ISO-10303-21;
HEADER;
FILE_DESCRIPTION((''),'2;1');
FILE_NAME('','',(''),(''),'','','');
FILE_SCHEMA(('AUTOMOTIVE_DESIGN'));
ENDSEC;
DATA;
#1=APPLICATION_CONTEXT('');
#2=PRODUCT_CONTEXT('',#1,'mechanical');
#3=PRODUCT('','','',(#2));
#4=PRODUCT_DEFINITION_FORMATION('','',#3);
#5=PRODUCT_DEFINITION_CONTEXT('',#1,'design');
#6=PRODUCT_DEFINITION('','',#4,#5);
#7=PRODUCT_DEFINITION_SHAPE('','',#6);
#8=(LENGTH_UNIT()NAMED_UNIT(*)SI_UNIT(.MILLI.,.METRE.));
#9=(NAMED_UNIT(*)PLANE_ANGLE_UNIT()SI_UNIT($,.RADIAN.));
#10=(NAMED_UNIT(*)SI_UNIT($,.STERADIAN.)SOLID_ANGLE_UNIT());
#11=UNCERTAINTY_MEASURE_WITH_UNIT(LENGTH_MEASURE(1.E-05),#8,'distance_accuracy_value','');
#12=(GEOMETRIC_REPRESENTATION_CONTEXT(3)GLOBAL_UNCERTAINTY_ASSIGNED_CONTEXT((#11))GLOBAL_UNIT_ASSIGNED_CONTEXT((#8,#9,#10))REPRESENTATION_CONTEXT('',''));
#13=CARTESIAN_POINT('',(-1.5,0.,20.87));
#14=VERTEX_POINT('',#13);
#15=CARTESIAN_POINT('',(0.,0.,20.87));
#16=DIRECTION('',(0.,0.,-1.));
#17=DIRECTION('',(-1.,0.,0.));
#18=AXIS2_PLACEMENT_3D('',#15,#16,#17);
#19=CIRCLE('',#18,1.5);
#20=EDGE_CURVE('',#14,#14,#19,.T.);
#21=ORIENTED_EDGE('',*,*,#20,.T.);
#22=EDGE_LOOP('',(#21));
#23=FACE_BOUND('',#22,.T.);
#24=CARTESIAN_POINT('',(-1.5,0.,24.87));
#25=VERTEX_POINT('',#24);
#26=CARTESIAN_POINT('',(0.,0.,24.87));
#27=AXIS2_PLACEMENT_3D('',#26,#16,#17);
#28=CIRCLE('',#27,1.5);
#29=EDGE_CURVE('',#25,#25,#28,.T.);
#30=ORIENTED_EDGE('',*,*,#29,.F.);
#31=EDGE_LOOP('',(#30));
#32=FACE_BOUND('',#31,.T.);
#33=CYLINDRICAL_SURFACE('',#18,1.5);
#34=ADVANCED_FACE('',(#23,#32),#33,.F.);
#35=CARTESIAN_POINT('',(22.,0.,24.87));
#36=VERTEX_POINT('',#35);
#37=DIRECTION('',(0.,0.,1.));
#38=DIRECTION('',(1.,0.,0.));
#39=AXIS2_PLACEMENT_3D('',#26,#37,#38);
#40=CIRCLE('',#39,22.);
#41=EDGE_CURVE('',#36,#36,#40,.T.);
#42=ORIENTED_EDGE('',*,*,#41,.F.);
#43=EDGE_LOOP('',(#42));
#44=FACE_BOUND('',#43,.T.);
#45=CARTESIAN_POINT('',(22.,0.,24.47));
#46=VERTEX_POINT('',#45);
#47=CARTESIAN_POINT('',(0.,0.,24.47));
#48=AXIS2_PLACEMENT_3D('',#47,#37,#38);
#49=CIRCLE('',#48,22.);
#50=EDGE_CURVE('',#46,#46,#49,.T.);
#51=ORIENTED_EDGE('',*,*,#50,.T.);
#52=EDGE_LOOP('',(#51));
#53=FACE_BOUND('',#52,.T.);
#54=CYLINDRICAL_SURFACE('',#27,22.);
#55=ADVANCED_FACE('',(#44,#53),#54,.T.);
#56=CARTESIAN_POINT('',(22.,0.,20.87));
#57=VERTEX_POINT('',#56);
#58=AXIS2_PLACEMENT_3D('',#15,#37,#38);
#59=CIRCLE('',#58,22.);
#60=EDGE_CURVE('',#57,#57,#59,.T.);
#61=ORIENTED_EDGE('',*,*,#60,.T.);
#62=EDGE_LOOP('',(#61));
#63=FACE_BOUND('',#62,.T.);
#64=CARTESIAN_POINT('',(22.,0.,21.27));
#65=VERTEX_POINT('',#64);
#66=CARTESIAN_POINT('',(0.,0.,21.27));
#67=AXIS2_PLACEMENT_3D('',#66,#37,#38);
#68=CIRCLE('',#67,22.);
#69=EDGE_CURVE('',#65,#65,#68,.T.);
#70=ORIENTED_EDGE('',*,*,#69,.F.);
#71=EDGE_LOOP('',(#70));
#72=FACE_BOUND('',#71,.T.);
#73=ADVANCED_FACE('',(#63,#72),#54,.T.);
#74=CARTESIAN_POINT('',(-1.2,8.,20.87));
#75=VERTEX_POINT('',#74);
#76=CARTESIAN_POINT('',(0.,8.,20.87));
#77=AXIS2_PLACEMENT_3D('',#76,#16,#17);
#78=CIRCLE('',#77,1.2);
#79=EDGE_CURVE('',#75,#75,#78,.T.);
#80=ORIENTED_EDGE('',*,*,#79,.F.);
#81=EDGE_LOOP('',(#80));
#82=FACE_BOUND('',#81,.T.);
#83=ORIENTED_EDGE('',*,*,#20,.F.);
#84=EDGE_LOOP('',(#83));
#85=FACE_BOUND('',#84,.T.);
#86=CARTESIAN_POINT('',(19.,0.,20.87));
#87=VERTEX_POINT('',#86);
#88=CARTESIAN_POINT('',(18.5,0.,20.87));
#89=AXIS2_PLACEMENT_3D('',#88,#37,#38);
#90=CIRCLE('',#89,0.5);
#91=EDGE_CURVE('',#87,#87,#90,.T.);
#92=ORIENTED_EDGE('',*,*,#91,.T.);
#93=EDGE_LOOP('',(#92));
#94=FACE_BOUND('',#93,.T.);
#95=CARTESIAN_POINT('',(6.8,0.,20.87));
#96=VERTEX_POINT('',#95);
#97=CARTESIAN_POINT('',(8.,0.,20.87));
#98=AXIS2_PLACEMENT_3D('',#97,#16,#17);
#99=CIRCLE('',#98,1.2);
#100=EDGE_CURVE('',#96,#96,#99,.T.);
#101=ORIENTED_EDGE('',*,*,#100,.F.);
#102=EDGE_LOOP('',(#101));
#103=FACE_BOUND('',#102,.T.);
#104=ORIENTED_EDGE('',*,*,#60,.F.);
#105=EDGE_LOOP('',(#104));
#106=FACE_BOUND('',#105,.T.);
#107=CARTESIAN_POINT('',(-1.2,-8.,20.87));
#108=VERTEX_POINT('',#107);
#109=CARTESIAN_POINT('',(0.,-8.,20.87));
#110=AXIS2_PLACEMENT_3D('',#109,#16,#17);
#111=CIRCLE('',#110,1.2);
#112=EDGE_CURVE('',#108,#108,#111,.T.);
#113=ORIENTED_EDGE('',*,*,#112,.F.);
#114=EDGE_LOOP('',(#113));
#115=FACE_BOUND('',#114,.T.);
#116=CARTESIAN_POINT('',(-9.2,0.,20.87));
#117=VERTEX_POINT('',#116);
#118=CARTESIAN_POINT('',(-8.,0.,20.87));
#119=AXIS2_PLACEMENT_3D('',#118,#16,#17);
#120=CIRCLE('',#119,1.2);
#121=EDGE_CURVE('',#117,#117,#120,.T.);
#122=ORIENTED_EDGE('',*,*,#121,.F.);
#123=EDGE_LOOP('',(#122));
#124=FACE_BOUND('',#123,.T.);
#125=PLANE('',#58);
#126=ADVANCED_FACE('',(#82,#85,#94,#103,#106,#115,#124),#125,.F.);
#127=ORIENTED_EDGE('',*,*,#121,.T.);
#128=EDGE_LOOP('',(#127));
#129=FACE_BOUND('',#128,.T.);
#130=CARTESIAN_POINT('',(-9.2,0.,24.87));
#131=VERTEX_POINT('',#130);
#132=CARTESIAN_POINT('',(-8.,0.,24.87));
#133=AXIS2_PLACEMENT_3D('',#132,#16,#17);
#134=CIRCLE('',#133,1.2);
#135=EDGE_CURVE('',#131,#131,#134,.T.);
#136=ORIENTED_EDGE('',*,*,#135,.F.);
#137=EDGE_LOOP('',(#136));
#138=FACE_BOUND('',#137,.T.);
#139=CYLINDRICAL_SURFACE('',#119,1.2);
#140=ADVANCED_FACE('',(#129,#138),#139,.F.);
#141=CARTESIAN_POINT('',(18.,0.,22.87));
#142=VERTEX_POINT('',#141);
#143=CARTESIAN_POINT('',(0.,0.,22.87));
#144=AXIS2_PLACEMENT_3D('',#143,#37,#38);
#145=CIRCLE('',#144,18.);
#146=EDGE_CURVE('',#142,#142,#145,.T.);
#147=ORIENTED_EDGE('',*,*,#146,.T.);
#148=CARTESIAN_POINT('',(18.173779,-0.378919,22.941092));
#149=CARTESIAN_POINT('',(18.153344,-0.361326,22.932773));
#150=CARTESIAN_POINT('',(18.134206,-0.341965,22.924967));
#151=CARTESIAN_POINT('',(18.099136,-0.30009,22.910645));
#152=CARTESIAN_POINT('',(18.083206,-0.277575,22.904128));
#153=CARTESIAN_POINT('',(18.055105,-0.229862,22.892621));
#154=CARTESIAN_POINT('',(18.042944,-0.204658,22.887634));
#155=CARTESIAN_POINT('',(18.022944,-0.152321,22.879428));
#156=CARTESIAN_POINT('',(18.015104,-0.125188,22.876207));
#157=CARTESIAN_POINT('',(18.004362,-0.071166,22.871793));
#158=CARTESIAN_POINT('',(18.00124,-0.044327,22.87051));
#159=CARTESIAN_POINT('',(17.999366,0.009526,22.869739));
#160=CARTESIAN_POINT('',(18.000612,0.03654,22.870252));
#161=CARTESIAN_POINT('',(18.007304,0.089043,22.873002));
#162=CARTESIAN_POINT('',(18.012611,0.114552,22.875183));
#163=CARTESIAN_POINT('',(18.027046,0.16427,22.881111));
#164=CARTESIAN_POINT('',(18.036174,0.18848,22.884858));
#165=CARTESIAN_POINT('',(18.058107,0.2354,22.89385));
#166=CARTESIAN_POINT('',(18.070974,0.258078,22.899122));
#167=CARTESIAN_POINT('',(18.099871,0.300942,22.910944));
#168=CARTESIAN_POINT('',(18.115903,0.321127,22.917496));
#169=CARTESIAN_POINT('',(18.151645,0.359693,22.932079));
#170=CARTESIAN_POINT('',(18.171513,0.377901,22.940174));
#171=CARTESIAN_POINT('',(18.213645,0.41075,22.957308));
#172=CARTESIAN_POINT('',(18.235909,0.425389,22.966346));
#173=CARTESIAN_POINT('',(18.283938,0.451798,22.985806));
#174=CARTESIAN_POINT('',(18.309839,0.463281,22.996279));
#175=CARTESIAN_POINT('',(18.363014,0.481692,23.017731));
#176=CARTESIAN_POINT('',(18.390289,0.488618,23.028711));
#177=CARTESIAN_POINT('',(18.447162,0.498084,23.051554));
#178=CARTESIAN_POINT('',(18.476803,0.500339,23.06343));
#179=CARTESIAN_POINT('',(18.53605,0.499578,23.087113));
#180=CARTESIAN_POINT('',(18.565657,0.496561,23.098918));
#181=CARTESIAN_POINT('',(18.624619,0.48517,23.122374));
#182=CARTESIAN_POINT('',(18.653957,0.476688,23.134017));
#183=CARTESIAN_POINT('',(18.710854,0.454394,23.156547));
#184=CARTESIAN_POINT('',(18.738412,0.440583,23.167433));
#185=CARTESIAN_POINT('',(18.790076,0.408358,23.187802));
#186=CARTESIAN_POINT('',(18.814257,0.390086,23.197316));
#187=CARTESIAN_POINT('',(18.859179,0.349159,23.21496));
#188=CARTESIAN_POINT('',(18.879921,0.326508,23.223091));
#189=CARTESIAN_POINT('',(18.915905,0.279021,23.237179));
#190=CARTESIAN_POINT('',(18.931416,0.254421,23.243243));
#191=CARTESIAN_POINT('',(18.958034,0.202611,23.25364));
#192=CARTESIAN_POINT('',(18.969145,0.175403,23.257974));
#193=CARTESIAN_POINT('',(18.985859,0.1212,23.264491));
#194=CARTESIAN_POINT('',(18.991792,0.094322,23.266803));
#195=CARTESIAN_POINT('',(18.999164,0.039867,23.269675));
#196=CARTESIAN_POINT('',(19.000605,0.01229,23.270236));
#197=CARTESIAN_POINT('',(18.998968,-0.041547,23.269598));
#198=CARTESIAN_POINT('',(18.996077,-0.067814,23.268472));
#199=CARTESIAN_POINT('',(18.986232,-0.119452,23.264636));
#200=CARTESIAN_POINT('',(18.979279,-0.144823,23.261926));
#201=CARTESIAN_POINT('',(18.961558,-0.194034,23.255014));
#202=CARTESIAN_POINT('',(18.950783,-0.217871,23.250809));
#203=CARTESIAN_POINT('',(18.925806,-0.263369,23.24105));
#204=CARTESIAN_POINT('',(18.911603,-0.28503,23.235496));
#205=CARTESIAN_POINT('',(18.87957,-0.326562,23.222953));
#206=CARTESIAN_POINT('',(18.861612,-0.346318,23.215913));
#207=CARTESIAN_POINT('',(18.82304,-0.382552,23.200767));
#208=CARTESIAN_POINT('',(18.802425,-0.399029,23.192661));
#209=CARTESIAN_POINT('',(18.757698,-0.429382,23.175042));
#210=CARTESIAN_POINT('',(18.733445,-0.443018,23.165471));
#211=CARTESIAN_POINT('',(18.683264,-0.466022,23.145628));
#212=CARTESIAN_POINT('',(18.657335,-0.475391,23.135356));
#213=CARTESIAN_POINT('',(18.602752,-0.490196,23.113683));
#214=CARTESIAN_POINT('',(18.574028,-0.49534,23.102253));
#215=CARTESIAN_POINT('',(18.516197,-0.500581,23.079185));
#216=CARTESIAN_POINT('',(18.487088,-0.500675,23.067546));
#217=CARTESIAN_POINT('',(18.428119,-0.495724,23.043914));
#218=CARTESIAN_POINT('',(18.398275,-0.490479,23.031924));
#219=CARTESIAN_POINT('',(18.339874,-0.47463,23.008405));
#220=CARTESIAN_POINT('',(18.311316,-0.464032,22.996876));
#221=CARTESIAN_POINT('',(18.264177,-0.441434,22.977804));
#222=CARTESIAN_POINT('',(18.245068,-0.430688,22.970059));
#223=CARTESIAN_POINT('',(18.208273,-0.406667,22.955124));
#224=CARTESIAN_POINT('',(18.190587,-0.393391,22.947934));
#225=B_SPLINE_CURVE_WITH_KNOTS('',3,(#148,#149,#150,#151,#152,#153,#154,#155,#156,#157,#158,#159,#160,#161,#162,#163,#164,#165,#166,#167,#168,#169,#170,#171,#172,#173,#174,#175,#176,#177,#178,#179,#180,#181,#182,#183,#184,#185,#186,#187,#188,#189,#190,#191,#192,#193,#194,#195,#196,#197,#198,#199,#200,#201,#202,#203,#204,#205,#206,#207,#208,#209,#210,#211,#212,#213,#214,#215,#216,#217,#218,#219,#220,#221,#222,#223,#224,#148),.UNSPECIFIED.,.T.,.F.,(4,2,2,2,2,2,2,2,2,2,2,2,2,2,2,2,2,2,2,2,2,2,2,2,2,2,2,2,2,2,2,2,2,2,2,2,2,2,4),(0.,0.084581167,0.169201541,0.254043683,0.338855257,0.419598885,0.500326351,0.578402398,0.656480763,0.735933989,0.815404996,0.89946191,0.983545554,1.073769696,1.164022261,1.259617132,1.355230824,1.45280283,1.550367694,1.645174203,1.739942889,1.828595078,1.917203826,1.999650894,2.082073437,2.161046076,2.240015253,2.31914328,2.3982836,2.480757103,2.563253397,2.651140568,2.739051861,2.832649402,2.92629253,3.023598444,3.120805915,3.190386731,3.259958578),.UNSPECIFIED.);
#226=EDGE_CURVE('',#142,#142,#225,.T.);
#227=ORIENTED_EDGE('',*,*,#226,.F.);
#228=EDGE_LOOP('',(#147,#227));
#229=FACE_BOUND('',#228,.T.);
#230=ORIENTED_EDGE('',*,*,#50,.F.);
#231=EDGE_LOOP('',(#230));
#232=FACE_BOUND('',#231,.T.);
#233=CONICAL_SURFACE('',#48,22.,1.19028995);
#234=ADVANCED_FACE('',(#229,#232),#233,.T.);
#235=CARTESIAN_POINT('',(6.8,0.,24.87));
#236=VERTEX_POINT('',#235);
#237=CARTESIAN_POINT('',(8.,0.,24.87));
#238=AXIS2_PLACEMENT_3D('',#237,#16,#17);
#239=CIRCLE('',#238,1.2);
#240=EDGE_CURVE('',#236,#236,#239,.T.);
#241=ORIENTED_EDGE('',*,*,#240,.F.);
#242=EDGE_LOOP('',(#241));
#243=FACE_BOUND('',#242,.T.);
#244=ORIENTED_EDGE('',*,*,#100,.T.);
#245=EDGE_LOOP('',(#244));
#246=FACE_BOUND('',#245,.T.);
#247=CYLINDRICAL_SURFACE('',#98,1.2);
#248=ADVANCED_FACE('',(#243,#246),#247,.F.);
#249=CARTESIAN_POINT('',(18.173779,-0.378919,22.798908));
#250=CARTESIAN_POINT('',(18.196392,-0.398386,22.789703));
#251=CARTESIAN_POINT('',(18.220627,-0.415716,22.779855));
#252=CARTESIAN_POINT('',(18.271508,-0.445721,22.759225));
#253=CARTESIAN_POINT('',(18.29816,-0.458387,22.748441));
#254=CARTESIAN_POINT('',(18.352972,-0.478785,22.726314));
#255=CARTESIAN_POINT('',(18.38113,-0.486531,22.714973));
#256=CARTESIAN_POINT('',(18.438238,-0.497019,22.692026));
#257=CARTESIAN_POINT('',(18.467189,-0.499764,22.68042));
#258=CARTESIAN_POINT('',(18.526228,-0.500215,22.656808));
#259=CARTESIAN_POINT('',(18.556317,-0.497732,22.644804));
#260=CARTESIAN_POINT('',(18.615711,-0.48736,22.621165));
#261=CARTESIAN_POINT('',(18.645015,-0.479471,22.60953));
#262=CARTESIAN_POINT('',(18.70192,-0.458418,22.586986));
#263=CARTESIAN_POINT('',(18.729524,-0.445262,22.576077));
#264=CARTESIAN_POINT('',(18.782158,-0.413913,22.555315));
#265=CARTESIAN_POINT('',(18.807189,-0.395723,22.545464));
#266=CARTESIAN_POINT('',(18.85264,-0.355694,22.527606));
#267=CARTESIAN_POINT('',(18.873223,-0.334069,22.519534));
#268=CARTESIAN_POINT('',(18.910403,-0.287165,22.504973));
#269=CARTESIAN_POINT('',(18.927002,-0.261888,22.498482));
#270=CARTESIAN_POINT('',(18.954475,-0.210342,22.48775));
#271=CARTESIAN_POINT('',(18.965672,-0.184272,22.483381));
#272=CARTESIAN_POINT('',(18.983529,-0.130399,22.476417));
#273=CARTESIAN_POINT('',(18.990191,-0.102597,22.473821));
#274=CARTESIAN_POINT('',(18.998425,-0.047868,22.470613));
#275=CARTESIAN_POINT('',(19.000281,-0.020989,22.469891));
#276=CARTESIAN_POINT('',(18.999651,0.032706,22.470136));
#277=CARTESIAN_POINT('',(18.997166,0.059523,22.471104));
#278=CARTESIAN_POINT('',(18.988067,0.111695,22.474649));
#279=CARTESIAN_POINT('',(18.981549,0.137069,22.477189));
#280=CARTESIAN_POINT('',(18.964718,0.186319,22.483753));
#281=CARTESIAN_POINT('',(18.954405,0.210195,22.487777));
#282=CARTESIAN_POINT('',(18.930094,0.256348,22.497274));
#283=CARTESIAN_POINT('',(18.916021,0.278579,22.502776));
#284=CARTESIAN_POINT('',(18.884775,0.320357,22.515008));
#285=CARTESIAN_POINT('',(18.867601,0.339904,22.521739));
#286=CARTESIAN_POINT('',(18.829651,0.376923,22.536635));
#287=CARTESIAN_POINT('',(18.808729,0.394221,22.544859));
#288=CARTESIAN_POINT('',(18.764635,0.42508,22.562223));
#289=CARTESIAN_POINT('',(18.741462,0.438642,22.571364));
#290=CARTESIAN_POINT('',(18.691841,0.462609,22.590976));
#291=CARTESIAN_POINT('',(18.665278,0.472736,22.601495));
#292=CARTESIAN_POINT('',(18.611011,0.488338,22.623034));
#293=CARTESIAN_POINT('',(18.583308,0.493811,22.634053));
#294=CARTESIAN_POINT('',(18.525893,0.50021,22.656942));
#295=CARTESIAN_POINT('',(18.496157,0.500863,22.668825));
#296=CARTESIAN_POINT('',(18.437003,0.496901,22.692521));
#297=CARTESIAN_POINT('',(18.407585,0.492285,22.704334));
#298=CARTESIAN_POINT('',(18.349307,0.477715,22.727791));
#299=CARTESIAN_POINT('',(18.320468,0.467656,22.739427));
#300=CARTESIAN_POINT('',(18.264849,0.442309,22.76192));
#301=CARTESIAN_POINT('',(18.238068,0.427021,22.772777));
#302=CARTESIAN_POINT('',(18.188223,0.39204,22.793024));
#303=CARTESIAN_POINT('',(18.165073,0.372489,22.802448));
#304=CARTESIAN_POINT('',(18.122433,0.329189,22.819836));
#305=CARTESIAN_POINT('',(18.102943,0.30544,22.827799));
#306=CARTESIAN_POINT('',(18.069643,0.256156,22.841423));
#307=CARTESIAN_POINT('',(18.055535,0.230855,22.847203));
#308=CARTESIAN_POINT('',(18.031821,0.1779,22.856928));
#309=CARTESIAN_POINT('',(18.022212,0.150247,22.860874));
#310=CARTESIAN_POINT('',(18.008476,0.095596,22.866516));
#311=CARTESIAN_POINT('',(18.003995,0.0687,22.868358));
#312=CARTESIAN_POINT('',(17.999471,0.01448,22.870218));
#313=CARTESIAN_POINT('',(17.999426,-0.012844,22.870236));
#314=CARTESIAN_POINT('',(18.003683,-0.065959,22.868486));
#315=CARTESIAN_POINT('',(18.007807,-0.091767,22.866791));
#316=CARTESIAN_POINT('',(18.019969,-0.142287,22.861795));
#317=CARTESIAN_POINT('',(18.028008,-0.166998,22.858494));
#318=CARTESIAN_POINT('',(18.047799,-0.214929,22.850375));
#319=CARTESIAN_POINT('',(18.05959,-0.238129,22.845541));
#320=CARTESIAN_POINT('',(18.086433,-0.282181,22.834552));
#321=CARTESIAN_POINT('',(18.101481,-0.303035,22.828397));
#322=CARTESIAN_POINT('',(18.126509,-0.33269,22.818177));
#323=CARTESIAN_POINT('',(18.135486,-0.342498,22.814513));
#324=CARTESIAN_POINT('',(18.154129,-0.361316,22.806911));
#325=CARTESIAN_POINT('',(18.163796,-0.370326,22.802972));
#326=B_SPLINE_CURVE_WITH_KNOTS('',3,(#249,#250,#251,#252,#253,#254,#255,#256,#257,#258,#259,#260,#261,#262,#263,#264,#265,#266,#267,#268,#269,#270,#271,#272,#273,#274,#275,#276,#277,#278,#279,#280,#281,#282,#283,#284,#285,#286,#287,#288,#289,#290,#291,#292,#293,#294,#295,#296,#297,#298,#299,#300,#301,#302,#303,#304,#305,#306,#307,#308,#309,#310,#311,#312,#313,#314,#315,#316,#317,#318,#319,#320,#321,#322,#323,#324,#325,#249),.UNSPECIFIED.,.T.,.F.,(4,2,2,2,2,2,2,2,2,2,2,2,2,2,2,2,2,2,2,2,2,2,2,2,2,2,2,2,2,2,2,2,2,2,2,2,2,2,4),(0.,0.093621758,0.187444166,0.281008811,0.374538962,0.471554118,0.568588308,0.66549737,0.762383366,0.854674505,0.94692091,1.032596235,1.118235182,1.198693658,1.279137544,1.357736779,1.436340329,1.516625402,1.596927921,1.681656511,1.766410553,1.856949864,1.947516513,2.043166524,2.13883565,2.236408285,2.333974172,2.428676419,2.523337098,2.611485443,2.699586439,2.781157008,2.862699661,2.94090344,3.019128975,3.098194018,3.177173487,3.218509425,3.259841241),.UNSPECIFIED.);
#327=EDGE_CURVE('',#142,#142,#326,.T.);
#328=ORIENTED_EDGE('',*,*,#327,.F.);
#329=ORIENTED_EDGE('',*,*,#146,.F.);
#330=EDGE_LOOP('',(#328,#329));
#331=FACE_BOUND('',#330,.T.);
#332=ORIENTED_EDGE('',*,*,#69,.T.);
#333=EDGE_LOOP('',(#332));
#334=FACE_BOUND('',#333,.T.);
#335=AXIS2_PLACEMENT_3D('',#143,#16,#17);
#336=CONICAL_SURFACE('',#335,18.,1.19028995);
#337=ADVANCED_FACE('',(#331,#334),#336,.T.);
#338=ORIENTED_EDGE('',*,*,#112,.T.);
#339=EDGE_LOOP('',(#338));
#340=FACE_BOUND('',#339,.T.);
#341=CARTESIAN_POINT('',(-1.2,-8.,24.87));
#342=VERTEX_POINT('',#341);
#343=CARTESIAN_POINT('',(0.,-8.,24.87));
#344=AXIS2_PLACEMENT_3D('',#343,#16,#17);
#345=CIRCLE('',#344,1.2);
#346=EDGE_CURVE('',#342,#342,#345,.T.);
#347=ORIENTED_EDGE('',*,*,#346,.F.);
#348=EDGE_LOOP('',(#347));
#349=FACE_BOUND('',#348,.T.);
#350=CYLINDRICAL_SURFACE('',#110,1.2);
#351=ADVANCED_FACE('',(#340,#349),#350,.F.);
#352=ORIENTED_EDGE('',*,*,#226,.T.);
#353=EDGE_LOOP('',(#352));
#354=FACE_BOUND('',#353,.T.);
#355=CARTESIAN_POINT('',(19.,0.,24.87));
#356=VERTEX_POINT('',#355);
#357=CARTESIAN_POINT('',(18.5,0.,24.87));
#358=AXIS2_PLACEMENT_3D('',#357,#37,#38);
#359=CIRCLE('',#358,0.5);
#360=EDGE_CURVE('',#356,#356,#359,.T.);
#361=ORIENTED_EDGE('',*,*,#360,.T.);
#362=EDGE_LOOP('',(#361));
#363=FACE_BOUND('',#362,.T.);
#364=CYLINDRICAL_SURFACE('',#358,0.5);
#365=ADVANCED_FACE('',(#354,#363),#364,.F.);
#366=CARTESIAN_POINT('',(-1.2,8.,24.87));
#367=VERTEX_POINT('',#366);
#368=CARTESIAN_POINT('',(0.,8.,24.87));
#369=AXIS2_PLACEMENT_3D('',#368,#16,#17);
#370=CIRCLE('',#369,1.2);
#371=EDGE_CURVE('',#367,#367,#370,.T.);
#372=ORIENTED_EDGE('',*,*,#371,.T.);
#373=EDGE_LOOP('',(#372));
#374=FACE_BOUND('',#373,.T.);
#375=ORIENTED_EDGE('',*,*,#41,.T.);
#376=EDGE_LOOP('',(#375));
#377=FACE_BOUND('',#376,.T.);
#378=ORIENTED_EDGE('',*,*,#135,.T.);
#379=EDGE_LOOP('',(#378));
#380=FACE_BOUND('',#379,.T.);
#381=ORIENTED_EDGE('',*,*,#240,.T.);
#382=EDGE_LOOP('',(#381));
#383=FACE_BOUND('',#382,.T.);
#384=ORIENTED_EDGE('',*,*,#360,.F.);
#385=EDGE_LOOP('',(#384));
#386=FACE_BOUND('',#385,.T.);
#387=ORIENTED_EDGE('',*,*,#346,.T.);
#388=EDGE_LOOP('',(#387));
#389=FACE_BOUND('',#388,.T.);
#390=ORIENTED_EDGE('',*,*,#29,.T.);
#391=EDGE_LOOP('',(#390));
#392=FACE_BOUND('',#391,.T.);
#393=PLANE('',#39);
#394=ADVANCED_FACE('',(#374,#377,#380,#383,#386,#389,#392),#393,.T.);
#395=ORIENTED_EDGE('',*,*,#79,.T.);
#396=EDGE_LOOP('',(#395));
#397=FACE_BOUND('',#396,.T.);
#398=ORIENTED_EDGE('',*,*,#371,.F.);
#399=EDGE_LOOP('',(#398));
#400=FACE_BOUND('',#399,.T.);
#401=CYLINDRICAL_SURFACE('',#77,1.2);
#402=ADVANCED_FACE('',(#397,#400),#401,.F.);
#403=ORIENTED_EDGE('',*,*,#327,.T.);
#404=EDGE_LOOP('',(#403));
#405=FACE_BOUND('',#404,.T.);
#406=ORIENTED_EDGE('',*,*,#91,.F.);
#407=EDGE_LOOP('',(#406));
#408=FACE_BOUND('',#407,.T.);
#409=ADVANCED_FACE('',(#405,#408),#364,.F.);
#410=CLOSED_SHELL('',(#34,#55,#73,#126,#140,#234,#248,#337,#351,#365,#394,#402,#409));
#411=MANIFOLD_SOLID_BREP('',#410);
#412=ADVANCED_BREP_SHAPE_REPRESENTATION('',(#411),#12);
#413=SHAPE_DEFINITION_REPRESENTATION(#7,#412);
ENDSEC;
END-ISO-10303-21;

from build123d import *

# Parameters (mm, degrees)
SKETCH1_R                = 22
BOSS_EXTRUDE1_DEPTH      = 4
M2_CLEARANCE_HOLE1_D     = 2.4
F_1_0_1_DIAMETER_HOLE1_D = 1
F_3_0_3_DIAMETER_HOLE1_D = 3


# Read off the part's stored shape, not the designer's step: Imported1
with BuildPart() as part:
    # Sketch1 → Boss-Extrude1 (new body)
    with BuildSketch(Plane.XY.offset(20.87)):
        Circle(SKETCH1_R)
    extrude(amount=BOSS_EXTRUDE1_DEPTH)

    # M2 Clearance Hole1 (through all)
    with Locations(Plane(origin=(0, 0, 20.87), x_dir=(-1, 0, 0), z_dir=(0, 0, -1))):
        with Locations((0, 8), (-8, 0), (0, -8), (8, 0)):
            Hole(M2_CLEARANCE_HOLE1_D / 2)

    # Sketch4 → Cut-Revolve5 (revolve, cut)
    with BuildSketch(Plane(origin=(0, 0, 0), x_dir=(0, 0, -1), z_dir=(1, 0, 0)), mode=Mode.PRIVATE) as cut_revolve5_sk:
        Polygon((-21.27, 22), (-24.47, 22), (-22.87, 18), align=None)
    revolve(cut_revolve5_sk.sketch.rotate(Axis((0, 0, 24.47), (0, 0, 1)), 270), axis=Axis((0, 0, 24.47), (0, 0, 1)), mode=Mode.SUBTRACT)

    # Ø1.0 (1) Diameter Hole1 (through all)
    with Locations(Plane.XY.offset(24.87)):
        with Locations((18.5, 0)):
            Hole(F_1_0_1_DIAMETER_HOLE1_D / 2)

    # Ø3.0 (3) Diameter Hole1 (through all)
    with Locations(Plane(origin=(0, 0, 20.87), x_dir=(-1, 0, 0), z_dir=(0, 0, -1))):
        with Locations((0, 0)):
            Hole(F_3_0_3_DIAMETER_HOLE1_D / 2)


solid = part.part
